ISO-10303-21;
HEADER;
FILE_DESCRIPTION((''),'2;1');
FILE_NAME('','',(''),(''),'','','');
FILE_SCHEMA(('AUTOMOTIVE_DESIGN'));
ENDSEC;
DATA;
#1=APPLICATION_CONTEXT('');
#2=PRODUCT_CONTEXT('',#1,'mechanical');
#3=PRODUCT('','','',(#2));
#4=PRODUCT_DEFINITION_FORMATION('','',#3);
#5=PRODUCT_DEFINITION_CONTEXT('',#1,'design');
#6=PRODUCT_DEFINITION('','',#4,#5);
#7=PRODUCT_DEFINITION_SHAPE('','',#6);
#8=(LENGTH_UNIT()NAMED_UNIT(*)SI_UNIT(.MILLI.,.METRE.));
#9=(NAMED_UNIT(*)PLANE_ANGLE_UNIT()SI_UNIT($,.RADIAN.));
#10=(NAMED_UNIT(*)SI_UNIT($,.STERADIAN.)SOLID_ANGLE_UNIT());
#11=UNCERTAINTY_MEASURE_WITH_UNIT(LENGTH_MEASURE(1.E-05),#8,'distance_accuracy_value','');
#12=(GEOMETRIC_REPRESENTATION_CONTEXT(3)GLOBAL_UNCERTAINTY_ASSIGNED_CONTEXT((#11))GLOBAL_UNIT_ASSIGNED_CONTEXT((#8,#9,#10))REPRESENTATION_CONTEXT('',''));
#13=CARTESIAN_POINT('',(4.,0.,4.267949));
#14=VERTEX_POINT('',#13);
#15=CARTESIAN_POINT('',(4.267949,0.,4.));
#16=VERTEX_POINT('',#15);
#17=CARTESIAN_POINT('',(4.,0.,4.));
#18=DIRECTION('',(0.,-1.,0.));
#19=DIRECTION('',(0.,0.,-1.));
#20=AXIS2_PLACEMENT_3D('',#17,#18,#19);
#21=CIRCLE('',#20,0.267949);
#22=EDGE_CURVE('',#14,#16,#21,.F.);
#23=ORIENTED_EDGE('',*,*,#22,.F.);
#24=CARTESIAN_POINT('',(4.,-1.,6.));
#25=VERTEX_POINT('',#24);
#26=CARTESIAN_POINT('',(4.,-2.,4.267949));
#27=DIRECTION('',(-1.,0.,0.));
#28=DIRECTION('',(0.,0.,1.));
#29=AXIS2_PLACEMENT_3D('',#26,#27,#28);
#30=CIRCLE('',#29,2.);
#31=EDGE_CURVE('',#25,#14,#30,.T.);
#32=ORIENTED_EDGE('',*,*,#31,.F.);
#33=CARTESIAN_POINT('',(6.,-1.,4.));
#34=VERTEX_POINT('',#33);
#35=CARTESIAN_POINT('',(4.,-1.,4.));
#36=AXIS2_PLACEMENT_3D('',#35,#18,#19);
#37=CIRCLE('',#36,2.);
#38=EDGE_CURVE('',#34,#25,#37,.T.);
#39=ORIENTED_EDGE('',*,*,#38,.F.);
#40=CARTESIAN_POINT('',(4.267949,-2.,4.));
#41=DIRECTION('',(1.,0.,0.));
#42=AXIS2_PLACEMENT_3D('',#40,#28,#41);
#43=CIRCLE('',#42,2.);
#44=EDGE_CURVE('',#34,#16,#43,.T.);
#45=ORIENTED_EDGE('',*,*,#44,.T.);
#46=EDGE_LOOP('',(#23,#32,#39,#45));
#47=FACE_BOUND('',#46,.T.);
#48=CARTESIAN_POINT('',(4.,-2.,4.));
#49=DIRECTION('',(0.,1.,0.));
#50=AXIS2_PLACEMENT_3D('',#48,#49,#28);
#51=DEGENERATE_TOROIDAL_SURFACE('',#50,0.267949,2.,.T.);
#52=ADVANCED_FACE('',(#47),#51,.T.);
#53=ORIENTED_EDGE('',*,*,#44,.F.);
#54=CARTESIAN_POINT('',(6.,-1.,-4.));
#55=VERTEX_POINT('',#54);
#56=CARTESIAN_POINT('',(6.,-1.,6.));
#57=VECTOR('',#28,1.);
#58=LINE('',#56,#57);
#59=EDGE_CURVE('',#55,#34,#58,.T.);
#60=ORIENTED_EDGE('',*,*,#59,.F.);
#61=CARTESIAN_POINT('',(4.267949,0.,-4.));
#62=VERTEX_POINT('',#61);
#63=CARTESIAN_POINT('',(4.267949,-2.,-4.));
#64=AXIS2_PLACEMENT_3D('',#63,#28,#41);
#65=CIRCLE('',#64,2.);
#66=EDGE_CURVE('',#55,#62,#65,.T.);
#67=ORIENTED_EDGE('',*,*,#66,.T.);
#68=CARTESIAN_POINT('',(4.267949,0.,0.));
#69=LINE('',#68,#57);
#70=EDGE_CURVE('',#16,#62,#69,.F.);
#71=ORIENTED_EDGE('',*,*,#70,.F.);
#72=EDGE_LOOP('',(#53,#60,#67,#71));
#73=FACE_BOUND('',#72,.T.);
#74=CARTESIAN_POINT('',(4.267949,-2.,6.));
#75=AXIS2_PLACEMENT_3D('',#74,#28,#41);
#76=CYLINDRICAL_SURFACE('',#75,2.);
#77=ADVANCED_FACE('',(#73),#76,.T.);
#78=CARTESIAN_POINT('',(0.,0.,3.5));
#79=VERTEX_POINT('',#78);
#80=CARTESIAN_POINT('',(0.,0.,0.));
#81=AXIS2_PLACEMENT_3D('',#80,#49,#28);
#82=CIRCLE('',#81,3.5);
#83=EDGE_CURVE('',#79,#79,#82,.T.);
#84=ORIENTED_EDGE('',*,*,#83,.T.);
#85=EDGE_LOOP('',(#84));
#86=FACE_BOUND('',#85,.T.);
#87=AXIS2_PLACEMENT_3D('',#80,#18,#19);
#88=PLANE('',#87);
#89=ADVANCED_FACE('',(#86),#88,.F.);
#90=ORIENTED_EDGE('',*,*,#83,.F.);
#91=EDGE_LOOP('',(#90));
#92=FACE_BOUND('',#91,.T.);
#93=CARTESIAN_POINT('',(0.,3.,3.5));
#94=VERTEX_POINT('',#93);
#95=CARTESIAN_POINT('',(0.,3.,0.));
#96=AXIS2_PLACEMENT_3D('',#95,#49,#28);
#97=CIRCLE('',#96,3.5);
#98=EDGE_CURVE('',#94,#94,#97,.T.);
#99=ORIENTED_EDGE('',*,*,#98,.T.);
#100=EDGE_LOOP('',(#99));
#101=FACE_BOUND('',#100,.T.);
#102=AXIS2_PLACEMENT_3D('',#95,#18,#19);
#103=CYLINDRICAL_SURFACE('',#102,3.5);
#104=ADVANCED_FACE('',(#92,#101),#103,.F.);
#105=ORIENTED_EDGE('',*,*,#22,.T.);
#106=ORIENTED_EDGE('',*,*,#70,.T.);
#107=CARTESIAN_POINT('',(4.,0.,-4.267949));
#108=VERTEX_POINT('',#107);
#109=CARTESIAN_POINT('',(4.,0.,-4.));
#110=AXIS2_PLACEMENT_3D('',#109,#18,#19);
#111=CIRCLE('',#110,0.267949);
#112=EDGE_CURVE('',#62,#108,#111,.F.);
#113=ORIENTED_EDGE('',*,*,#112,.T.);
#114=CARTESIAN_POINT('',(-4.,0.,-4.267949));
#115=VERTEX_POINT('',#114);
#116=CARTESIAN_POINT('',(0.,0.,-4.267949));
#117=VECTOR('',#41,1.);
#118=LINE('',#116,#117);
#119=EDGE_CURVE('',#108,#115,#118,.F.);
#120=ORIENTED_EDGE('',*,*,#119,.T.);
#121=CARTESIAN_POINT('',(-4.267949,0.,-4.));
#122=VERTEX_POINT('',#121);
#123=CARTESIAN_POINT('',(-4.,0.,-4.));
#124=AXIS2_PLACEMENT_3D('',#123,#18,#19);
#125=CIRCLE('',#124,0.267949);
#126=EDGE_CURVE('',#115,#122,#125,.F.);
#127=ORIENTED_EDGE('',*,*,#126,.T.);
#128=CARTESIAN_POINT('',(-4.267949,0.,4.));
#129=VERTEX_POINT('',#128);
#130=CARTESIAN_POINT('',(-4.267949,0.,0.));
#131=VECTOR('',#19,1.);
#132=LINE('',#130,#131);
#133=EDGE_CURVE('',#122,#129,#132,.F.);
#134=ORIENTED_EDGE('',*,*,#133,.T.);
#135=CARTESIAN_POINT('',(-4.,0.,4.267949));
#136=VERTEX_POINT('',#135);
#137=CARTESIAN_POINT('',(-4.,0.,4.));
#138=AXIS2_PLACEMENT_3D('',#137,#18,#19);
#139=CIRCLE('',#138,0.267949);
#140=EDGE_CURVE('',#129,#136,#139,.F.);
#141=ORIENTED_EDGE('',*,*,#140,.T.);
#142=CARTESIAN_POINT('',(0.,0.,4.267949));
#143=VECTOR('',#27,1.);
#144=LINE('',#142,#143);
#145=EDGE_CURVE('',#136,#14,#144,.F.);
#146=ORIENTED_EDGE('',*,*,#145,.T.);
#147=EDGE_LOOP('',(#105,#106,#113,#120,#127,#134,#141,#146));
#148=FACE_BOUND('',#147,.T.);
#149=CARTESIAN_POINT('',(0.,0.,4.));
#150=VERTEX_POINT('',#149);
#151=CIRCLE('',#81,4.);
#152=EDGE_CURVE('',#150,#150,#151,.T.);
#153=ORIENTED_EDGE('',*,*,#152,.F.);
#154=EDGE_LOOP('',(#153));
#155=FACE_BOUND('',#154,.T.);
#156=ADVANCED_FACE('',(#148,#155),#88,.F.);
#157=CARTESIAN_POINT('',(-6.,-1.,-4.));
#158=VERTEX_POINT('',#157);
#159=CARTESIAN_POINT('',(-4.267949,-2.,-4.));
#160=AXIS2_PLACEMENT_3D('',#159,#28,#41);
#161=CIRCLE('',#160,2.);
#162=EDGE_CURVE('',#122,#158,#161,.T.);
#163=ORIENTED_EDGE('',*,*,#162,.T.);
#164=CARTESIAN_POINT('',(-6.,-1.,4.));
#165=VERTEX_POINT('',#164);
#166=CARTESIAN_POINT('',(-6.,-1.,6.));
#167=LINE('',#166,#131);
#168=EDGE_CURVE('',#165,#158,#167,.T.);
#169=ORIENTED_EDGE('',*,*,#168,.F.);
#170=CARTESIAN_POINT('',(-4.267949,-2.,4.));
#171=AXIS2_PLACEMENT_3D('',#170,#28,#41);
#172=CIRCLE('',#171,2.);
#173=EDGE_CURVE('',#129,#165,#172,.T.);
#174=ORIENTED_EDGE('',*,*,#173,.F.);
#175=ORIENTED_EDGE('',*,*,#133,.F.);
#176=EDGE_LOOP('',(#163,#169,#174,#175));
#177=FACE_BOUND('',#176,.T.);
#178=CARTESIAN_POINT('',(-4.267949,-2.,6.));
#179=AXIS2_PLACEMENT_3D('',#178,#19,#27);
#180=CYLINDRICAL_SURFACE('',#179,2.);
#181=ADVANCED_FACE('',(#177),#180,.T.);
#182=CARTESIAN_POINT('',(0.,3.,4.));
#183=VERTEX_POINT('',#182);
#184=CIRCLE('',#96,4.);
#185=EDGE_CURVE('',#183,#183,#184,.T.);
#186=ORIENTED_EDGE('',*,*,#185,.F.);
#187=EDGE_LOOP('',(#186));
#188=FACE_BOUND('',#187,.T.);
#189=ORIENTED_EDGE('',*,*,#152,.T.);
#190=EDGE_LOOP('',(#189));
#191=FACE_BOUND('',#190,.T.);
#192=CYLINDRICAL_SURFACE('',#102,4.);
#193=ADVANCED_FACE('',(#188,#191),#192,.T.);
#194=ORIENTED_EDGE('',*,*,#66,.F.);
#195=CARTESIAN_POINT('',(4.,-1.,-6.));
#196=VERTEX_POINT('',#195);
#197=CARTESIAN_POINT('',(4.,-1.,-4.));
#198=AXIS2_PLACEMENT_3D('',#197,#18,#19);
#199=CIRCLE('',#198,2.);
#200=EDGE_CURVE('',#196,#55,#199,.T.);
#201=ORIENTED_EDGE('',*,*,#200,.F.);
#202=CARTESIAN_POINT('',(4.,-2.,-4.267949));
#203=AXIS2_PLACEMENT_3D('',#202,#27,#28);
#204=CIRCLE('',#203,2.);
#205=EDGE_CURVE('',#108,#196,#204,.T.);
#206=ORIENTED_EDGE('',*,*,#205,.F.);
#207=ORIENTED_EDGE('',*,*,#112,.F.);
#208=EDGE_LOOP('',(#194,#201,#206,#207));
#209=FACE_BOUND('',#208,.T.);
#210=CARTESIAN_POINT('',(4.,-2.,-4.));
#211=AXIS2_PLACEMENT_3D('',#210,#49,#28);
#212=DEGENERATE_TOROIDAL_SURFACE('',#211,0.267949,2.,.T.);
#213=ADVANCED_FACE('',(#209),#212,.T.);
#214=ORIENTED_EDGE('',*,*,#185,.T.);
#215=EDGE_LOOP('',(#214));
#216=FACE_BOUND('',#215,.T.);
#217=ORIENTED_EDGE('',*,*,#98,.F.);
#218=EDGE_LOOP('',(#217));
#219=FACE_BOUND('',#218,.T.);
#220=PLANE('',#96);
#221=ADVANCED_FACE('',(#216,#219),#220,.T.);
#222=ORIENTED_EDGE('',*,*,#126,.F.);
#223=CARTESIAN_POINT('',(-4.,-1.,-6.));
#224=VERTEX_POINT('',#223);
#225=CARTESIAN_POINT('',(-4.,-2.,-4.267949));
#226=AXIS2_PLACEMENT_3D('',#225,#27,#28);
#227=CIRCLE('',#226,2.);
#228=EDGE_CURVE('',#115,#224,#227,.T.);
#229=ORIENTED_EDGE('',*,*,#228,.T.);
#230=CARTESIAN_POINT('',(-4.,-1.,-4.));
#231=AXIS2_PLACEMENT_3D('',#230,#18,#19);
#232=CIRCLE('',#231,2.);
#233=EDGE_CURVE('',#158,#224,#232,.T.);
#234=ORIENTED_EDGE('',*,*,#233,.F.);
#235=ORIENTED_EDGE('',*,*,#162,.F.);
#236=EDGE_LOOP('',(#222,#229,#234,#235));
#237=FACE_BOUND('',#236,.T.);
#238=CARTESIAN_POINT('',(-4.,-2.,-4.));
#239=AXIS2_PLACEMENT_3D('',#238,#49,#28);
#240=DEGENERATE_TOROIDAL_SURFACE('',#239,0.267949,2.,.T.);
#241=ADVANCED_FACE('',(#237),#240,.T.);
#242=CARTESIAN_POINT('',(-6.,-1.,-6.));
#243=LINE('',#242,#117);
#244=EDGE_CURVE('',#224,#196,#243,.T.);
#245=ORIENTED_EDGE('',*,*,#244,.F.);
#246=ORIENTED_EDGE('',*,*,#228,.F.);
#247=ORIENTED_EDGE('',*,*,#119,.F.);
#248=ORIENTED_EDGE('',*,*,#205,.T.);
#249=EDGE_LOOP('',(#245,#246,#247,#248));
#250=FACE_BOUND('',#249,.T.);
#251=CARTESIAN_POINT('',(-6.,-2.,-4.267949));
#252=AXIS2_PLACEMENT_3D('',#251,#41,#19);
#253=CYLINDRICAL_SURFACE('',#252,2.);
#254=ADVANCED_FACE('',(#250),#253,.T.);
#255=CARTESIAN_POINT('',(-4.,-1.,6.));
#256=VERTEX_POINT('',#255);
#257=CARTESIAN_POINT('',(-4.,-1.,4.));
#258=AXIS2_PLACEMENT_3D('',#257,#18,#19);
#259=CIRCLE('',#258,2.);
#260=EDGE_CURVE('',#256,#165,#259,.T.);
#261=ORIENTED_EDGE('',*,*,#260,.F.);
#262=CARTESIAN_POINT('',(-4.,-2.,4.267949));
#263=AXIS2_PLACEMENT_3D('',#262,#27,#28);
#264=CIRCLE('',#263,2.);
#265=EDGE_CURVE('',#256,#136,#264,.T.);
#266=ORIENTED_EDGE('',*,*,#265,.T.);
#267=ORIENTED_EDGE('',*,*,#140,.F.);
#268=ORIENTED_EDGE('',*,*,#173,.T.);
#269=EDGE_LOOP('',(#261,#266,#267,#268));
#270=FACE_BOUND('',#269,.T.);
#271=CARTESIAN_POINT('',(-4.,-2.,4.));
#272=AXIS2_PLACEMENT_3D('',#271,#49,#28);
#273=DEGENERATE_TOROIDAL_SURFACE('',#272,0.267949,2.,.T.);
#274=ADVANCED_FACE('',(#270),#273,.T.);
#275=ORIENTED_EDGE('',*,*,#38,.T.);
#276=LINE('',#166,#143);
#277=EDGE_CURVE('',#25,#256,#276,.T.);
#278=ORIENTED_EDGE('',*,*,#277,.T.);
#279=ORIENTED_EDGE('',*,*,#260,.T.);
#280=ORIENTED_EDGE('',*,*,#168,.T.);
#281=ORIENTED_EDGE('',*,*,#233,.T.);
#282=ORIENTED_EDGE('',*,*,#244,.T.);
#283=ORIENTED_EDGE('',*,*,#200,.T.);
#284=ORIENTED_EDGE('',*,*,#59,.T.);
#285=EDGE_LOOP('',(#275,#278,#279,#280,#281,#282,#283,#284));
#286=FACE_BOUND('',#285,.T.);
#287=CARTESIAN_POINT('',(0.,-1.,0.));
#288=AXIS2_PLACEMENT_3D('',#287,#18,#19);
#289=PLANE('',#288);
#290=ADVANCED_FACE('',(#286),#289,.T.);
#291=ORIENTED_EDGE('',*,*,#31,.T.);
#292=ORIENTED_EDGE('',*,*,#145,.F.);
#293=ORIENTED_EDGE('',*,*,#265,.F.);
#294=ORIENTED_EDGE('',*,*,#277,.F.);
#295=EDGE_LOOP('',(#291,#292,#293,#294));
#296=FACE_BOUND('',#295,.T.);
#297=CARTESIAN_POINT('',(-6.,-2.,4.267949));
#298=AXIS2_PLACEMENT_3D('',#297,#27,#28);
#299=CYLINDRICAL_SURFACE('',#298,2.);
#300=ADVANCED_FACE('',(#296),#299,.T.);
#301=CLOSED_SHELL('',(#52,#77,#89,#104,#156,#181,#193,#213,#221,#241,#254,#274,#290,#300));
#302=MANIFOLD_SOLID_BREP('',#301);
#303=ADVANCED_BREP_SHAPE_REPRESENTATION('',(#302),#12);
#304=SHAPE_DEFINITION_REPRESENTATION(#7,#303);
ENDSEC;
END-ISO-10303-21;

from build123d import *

# Parameters (mm, degrees)
SKETCH1_R           = 4
SKETCH1_R_2         = 3.5
BOSS_EXTRUDE1_DEPTH = 3
SKETCH2_W           = 12
SKETCH2_H           = 12
BOSS_EXTRUDE2_DEPTH = 1
FILLET10_R          = 2
FILLET11_R          = 2


with BuildPart() as part:
    # Sketch1 → Boss-Extrude1 (new body)
    with BuildSketch(Plane(origin=(0, 0, 0), x_dir=(1, 0, 0), z_dir=(0, 1, 0))):
        with Locations(Location((0, 0, 0), (0, 0, 270))):
            Circle(SKETCH1_R)
        with Locations(Location((0, 0, 0), (0, 0, 270))):
            Circle(SKETCH1_R_2, mode=Mode.SUBTRACT)
    extrude(amount=BOSS_EXTRUDE1_DEPTH)

    # Sketch2 → Boss-Extrude2 (add)
    with BuildSketch(Plane.XZ):
        Rectangle(SKETCH2_W, SKETCH2_H)
    extrude(amount=BOSS_EXTRUDE2_DEPTH)

    # Fillet10
    fillet10_edges = [part.edges().sort_by_distance(p)[0] for p in [
        (6, -0.5, -6),
        (6, -0.5, 6),
        (-6, -0.5, 6),
        (-6, -0.5, -6),
    ]]
    fillet(fillet10_edges, radius=FILLET10_R)

    # Fillet11
    # the kernel refuses this fillet: 2 mm, written as the material it takes off along each edge
    with BuildSketch(Plane(origin=(-4, 0, 4), x_dir=(0, 0, 1), z_dir=(1, 0, 0))) as fillet11_piece_1:
        with BuildLine():
            CenterArc((0.267949192, 2), FILLET11_R, 270, 60)
            Line((2, 1), (2.034641016, 0.98))
            ThreePointArc((2.034641016, 0.98), (2.04, 0.5), (2.04, 0))
            Line((2.04, 0), (2, -0.04))
            Line((2, -0.04), (0.267949192, -0.04))
            Line((0.267949192, -0.04), (0.267949192, 0))
        make_face()
    revolve(axis=Axis((-4, 0, 4), (0, -1, 0)), revolution_arc=90, mode=Mode.SUBTRACT)
    with BuildSketch(Plane(origin=(-4, 0, 6), x_dir=(0, -1, 0), z_dir=(1, 0, 0))) as fillet11_piece_2:
        with BuildLine():
            CenterArc((2, 1.732050808), FILLET11_R, 180, 60)
            Line((0, 1.732050808), (-0.04, 1.732050808))
            Line((-0.04, 1.732050808), (-0.04, 0))
            Line((-0.04, 0), (0, -0.04))
            ThreePointArc((0, -0.04), (0.5, -0.04), (0.98, -0.034641016))
            Line((0.98, -0.034641016), (1, 0))
        make_face()
    extrude(amount=8, mode=Mode.SUBTRACT)
    with BuildSketch(Plane(origin=(4, 0, 4), x_dir=(0, 0, 1), z_dir=(-1, 0, 0))) as fillet11_piece_3:
        with BuildLine():
            CenterArc((0.267949192, -2), FILLET11_R, 30, 60)
            Line((2, -1), (2.034641016, -0.98))
            ThreePointArc((2.034641016, -0.98), (2.04, -0.5), (2.04, 0))
            Line((2.04, 0), (2, 0.04))
            Line((2, 0.04), (0.267949192, 0.04))
            Line((0.267949192, 0.04), (0.267949192, 0))
        make_face()
    revolve(axis=Axis((4, 0, 4), (0, 1, 0)), revolution_arc=90, mode=Mode.SUBTRACT)
    with BuildSketch(Plane(origin=(4, 0, -4), x_dir=(1, 0, 0), z_dir=(0, 0, 1))) as fillet11_piece_4:
        with BuildLine():
            CenterArc((0.267949192, -2), FILLET11_R, 30, 60)
            Line((2, -1), (2.034641016, -0.98))
            ThreePointArc((2.034641016, -0.98), (2.04, -0.5), (2.04, 0))
            Line((2.04, 0), (2, 0.04))
            Line((2, 0.04), (0.267949192, 0.04))
            Line((0.267949192, 0.04), (0.267949192, 0))
        make_face()
    revolve(axis=Axis((4, 0, -4), (0, 1, 0)), revolution_arc=90, mode=Mode.SUBTRACT)
    with BuildSketch(Plane(origin=(4, 0, -6), x_dir=(0, 0, 1), z_dir=(-1, 0, 0)), Plane(origin=(6, 0, 4), x_dir=(-1, 0, 0), z_dir=(0, 0, -1)), Plane(origin=(-6, 0, -4), x_dir=(1, 0, 0), z_dir=(0, 0, 1))) as fillet11_piece_5:
        with BuildLine():
            CenterArc((1.732050808, -2), FILLET11_R, 90, 60)
            Line((0, -1), (-0.034641016, -0.98))
            ThreePointArc((-0.034641016, -0.98), (-0.04, -0.5), (-0.04, 0))
            Line((-0.04, 0), (0, 0.04))
            Line((0, 0.04), (1.732050808, 0.04))
            Line((1.732050808, 0.04), (1.732050808, 0))
        make_face()
    extrude(amount=8, mode=Mode.SUBTRACT)
    with BuildSketch(Plane(origin=(-4, 0, -4), x_dir=(-1, 0, 0), z_dir=(0, 0, 1))) as fillet11_piece_6:
        with BuildLine():
            CenterArc((0.267949192, 2), FILLET11_R, 270, 60)
            Line((2, 1), (2.034641016, 0.98))
            ThreePointArc((2.034641016, 0.98), (2.04, 0.5), (2.04, 0))
            Line((2.04, 0), (2, -0.04))
            Line((2, -0.04), (0.267949192, -0.04))
            Line((0.267949192, -0.04), (0.267949192, 0))
        make_face()
    revolve(axis=Axis((-4, 0, -4), (0, -1, 0)), revolution_arc=90, mode=Mode.SUBTRACT)


solid = part.part
